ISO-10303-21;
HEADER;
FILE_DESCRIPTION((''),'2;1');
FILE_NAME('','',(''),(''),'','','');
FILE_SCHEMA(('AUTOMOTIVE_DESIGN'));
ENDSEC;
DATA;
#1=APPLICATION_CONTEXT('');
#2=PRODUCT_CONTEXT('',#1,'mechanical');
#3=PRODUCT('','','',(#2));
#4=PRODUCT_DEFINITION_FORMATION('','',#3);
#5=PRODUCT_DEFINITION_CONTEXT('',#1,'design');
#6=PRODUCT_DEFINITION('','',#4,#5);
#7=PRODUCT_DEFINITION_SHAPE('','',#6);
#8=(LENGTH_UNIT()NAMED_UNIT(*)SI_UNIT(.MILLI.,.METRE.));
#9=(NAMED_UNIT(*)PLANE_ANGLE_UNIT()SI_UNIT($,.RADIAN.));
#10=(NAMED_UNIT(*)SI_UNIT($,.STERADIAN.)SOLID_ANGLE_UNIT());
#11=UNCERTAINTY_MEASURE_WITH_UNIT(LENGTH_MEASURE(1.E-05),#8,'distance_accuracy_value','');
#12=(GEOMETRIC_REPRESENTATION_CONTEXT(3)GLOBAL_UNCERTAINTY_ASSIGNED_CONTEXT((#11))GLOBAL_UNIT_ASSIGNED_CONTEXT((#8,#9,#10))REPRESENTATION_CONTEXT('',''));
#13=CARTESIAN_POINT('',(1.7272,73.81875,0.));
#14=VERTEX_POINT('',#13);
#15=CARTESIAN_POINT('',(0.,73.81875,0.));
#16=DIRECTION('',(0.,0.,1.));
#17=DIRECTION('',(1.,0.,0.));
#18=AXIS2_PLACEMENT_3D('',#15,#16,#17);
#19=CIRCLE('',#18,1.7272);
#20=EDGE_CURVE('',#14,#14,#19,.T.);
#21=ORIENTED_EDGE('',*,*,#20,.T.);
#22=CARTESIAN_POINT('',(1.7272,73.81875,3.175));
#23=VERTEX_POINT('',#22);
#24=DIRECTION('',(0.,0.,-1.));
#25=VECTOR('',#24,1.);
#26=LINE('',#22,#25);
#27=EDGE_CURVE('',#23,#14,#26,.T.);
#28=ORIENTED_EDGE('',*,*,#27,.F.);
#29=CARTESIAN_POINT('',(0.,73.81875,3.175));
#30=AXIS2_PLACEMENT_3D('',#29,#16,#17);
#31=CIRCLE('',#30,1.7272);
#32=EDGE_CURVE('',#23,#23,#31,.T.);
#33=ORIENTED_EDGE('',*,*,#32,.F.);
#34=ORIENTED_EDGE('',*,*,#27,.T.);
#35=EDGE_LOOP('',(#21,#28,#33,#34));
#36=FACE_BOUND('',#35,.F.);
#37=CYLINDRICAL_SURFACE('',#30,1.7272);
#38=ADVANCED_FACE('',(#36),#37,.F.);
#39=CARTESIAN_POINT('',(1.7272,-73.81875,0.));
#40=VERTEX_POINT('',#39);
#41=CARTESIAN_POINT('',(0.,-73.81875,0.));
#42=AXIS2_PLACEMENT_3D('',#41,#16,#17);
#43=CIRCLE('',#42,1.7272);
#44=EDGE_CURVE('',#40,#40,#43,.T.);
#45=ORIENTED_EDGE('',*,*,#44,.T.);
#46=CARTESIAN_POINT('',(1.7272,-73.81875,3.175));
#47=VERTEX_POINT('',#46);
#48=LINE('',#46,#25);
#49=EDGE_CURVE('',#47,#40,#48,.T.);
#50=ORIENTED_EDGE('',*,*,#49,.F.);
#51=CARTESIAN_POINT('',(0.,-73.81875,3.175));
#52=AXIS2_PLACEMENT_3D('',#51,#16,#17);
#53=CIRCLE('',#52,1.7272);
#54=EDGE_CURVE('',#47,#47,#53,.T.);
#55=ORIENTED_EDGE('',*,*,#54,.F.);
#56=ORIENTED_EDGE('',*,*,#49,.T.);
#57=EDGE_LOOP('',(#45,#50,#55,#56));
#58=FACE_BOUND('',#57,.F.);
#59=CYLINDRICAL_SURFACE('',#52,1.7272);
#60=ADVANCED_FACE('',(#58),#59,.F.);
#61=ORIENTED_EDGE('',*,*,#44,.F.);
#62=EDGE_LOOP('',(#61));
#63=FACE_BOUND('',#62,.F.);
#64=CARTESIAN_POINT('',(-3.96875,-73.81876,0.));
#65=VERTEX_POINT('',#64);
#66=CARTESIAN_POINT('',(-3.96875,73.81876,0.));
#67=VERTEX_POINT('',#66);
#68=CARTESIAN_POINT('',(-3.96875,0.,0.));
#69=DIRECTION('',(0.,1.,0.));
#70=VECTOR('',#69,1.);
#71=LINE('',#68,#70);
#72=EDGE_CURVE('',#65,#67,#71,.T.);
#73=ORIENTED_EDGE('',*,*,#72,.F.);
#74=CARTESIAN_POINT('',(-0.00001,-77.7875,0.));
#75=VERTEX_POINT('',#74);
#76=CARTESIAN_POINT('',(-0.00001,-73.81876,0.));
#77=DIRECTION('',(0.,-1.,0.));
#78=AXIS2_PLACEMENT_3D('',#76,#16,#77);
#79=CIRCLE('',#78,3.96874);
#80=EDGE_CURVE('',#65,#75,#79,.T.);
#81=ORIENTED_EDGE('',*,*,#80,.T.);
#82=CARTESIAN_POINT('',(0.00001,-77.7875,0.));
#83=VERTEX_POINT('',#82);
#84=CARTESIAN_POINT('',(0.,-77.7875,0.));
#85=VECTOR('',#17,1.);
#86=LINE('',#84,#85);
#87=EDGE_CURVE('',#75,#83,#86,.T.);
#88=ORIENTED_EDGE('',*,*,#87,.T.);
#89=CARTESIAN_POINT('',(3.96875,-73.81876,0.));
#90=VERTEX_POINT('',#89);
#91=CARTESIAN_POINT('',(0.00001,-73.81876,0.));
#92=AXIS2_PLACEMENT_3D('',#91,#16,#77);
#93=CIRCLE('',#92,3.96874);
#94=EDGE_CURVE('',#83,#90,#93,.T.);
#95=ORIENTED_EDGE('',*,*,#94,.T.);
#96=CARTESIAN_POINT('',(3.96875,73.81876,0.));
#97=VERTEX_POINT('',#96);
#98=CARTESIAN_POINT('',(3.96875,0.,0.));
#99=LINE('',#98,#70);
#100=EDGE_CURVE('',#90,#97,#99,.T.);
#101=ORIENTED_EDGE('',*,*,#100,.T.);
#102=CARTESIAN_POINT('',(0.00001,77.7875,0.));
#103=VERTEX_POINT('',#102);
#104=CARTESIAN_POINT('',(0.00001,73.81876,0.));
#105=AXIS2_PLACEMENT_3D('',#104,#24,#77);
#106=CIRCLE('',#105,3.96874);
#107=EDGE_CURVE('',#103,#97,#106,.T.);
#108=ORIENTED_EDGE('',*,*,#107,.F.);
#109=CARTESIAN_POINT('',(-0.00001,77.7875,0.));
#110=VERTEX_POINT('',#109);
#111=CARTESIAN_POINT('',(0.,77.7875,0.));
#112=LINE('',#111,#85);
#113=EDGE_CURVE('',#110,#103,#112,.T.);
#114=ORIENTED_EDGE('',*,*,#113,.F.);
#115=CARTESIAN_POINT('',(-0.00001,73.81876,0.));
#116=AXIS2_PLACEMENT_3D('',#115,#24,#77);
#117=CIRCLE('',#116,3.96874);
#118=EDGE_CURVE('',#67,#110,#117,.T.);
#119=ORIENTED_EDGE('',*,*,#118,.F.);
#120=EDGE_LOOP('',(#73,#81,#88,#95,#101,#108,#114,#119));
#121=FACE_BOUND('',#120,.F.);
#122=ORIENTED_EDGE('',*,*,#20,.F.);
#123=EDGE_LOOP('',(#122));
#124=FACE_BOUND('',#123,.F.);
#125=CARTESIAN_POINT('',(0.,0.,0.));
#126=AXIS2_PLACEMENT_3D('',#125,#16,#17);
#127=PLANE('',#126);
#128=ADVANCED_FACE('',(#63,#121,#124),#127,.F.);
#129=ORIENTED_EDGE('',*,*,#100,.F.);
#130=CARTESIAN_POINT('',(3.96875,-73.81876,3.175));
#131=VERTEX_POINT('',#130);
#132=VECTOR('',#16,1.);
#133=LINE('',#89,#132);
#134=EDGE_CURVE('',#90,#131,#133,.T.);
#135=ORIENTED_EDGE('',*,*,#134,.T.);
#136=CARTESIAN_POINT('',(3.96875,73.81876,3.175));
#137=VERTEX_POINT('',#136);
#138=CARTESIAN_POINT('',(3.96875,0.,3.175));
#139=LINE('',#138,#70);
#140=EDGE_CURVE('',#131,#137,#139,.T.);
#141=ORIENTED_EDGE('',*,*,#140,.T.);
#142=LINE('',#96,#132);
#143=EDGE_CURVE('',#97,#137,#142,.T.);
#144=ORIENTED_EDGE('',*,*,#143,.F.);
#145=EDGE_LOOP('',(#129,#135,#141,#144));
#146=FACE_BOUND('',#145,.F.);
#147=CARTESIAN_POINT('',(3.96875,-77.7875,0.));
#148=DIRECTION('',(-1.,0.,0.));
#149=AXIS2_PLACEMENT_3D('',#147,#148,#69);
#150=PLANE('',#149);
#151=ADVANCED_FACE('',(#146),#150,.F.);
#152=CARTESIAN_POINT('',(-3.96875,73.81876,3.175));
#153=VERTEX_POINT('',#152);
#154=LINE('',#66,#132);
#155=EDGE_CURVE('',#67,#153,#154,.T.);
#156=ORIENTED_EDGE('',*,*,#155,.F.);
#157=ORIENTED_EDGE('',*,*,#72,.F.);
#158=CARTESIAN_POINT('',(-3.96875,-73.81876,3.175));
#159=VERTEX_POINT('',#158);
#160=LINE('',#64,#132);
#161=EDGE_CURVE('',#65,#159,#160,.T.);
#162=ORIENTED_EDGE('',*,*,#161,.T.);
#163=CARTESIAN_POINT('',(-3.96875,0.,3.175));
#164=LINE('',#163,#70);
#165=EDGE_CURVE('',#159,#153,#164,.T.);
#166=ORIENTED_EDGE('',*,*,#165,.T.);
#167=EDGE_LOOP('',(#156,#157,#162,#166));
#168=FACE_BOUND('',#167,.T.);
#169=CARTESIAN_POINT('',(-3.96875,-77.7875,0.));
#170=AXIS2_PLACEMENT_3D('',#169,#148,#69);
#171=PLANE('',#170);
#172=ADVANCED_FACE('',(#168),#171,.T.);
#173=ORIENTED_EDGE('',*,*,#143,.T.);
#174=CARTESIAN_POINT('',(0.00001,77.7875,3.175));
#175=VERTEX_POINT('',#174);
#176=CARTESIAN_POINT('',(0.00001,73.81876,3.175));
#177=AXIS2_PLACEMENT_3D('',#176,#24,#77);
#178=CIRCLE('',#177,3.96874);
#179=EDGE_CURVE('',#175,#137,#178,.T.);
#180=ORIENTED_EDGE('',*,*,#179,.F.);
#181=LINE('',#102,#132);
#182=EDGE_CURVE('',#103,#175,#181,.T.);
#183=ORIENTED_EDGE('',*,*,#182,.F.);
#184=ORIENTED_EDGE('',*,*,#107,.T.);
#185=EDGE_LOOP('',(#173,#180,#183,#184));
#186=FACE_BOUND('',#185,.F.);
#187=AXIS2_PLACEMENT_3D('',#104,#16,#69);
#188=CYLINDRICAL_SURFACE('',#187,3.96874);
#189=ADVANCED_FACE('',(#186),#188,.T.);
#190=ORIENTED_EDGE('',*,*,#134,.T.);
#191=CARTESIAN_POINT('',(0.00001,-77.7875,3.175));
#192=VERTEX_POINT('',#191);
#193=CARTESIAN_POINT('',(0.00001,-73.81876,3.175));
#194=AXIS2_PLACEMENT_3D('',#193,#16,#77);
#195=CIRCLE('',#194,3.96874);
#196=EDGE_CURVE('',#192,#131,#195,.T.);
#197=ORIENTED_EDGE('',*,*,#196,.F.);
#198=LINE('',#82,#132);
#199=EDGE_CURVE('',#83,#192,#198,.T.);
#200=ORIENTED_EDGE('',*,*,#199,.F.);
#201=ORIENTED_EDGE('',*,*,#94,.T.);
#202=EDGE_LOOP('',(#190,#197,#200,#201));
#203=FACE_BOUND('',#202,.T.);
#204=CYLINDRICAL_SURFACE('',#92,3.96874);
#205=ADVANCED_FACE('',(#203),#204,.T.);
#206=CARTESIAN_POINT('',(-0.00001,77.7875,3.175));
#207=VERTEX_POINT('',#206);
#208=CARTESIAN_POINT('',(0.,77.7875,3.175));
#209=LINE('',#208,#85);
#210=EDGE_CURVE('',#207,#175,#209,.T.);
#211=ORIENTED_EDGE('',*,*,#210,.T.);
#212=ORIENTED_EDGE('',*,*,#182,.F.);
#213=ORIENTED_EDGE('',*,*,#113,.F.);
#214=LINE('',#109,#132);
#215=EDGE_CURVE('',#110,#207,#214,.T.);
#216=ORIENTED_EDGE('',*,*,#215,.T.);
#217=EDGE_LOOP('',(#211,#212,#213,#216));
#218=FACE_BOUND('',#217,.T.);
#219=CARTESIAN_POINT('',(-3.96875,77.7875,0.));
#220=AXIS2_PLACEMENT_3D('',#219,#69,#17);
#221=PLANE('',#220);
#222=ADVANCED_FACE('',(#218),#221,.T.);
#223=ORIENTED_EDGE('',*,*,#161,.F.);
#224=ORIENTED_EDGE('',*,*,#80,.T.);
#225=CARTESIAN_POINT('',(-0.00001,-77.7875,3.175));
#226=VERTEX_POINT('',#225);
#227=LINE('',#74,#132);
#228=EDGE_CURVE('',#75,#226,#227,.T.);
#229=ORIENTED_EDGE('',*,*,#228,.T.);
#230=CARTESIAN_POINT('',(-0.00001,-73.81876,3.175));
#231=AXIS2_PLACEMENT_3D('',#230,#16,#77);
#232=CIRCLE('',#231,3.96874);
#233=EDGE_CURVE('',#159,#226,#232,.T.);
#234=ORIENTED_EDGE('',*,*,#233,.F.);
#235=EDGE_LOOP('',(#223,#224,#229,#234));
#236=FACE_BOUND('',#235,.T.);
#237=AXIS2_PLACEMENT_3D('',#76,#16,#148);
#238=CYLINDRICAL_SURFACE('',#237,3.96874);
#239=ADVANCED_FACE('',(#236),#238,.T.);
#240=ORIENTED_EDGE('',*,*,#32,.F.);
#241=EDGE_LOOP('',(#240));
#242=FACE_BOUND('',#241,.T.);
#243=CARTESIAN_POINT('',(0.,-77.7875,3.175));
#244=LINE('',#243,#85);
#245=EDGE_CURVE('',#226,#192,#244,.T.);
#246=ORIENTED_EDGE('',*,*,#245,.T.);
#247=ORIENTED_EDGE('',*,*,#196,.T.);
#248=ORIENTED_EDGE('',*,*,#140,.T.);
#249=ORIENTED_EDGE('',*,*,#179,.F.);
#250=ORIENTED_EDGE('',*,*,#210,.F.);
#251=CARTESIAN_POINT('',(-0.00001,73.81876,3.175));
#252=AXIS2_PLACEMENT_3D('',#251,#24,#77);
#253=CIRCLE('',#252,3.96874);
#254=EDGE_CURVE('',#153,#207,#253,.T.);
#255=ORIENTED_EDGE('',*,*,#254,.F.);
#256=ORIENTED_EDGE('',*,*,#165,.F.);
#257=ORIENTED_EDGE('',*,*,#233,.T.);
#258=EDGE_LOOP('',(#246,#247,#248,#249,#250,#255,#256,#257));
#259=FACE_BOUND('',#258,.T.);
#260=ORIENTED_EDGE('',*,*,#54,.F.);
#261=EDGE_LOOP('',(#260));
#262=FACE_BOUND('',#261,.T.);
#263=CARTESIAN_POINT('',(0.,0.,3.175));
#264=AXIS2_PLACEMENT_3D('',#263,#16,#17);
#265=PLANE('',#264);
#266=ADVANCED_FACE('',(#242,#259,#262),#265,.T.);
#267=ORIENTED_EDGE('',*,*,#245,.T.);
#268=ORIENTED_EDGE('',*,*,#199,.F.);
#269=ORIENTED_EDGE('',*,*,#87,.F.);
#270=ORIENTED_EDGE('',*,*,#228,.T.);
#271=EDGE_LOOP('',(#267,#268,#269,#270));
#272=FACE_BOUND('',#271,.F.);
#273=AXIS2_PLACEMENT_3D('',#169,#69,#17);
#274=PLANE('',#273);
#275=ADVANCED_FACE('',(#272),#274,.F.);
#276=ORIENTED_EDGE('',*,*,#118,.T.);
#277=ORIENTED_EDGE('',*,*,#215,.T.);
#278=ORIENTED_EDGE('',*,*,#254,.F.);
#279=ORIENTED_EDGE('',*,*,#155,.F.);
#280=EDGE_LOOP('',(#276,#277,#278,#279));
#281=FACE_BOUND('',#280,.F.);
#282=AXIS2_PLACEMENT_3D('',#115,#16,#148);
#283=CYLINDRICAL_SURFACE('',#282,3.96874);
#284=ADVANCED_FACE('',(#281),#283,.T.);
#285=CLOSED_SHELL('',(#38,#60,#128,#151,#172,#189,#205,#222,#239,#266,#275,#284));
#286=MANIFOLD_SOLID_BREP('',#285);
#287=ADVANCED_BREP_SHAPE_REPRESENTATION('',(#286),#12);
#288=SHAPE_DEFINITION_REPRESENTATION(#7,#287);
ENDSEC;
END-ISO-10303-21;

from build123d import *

# Parameters (mm, degrees)
F0_W     = 7.9375
F0_H     = 155.575
F1_DEPTH = 3.175
F2_R     = 1.7272
F3_DEPTH = 3.175
F4_R     = 3.96874


# Not quite as in the source:
# - a fillet or chamfer is up to 0.001 mm smaller than in the source, because OpenCascade refuses the exact size


with BuildPart() as f1:
    # F0 (on Top) → F1 (new body)
    with BuildSketch(Plane.XY):
        Rectangle(F0_W, F0_H)
    extrude(amount=F1_DEPTH)

    # F2 (on face) → F3 (cut, through all)
    with BuildSketch(Plane.XY.offset(3.175)):
        with Locations((0, 73.81875)):
            Circle(F2_R)
        with Locations((0, -73.81875)):
            Circle(F2_R)
    extrude(amount=-F3_DEPTH, mode=Mode.SUBTRACT)

    # F4 (radius 3.96875 in the source; OpenCascade refuses exactly that, so slightly less here)
    f4_edges = [f1.edges().sort_by_distance(p)[0] for p in [
        (-3.96875, -77.7875, 1.5875),
        (3.96875, -77.7875, 1.5875),
        (3.96875, 77.7875, 1.5875),
        (-3.96875, 77.7875, 1.5875),
    ]]
    fillet(f4_edges, radius=F4_R)


solid = f1.part
